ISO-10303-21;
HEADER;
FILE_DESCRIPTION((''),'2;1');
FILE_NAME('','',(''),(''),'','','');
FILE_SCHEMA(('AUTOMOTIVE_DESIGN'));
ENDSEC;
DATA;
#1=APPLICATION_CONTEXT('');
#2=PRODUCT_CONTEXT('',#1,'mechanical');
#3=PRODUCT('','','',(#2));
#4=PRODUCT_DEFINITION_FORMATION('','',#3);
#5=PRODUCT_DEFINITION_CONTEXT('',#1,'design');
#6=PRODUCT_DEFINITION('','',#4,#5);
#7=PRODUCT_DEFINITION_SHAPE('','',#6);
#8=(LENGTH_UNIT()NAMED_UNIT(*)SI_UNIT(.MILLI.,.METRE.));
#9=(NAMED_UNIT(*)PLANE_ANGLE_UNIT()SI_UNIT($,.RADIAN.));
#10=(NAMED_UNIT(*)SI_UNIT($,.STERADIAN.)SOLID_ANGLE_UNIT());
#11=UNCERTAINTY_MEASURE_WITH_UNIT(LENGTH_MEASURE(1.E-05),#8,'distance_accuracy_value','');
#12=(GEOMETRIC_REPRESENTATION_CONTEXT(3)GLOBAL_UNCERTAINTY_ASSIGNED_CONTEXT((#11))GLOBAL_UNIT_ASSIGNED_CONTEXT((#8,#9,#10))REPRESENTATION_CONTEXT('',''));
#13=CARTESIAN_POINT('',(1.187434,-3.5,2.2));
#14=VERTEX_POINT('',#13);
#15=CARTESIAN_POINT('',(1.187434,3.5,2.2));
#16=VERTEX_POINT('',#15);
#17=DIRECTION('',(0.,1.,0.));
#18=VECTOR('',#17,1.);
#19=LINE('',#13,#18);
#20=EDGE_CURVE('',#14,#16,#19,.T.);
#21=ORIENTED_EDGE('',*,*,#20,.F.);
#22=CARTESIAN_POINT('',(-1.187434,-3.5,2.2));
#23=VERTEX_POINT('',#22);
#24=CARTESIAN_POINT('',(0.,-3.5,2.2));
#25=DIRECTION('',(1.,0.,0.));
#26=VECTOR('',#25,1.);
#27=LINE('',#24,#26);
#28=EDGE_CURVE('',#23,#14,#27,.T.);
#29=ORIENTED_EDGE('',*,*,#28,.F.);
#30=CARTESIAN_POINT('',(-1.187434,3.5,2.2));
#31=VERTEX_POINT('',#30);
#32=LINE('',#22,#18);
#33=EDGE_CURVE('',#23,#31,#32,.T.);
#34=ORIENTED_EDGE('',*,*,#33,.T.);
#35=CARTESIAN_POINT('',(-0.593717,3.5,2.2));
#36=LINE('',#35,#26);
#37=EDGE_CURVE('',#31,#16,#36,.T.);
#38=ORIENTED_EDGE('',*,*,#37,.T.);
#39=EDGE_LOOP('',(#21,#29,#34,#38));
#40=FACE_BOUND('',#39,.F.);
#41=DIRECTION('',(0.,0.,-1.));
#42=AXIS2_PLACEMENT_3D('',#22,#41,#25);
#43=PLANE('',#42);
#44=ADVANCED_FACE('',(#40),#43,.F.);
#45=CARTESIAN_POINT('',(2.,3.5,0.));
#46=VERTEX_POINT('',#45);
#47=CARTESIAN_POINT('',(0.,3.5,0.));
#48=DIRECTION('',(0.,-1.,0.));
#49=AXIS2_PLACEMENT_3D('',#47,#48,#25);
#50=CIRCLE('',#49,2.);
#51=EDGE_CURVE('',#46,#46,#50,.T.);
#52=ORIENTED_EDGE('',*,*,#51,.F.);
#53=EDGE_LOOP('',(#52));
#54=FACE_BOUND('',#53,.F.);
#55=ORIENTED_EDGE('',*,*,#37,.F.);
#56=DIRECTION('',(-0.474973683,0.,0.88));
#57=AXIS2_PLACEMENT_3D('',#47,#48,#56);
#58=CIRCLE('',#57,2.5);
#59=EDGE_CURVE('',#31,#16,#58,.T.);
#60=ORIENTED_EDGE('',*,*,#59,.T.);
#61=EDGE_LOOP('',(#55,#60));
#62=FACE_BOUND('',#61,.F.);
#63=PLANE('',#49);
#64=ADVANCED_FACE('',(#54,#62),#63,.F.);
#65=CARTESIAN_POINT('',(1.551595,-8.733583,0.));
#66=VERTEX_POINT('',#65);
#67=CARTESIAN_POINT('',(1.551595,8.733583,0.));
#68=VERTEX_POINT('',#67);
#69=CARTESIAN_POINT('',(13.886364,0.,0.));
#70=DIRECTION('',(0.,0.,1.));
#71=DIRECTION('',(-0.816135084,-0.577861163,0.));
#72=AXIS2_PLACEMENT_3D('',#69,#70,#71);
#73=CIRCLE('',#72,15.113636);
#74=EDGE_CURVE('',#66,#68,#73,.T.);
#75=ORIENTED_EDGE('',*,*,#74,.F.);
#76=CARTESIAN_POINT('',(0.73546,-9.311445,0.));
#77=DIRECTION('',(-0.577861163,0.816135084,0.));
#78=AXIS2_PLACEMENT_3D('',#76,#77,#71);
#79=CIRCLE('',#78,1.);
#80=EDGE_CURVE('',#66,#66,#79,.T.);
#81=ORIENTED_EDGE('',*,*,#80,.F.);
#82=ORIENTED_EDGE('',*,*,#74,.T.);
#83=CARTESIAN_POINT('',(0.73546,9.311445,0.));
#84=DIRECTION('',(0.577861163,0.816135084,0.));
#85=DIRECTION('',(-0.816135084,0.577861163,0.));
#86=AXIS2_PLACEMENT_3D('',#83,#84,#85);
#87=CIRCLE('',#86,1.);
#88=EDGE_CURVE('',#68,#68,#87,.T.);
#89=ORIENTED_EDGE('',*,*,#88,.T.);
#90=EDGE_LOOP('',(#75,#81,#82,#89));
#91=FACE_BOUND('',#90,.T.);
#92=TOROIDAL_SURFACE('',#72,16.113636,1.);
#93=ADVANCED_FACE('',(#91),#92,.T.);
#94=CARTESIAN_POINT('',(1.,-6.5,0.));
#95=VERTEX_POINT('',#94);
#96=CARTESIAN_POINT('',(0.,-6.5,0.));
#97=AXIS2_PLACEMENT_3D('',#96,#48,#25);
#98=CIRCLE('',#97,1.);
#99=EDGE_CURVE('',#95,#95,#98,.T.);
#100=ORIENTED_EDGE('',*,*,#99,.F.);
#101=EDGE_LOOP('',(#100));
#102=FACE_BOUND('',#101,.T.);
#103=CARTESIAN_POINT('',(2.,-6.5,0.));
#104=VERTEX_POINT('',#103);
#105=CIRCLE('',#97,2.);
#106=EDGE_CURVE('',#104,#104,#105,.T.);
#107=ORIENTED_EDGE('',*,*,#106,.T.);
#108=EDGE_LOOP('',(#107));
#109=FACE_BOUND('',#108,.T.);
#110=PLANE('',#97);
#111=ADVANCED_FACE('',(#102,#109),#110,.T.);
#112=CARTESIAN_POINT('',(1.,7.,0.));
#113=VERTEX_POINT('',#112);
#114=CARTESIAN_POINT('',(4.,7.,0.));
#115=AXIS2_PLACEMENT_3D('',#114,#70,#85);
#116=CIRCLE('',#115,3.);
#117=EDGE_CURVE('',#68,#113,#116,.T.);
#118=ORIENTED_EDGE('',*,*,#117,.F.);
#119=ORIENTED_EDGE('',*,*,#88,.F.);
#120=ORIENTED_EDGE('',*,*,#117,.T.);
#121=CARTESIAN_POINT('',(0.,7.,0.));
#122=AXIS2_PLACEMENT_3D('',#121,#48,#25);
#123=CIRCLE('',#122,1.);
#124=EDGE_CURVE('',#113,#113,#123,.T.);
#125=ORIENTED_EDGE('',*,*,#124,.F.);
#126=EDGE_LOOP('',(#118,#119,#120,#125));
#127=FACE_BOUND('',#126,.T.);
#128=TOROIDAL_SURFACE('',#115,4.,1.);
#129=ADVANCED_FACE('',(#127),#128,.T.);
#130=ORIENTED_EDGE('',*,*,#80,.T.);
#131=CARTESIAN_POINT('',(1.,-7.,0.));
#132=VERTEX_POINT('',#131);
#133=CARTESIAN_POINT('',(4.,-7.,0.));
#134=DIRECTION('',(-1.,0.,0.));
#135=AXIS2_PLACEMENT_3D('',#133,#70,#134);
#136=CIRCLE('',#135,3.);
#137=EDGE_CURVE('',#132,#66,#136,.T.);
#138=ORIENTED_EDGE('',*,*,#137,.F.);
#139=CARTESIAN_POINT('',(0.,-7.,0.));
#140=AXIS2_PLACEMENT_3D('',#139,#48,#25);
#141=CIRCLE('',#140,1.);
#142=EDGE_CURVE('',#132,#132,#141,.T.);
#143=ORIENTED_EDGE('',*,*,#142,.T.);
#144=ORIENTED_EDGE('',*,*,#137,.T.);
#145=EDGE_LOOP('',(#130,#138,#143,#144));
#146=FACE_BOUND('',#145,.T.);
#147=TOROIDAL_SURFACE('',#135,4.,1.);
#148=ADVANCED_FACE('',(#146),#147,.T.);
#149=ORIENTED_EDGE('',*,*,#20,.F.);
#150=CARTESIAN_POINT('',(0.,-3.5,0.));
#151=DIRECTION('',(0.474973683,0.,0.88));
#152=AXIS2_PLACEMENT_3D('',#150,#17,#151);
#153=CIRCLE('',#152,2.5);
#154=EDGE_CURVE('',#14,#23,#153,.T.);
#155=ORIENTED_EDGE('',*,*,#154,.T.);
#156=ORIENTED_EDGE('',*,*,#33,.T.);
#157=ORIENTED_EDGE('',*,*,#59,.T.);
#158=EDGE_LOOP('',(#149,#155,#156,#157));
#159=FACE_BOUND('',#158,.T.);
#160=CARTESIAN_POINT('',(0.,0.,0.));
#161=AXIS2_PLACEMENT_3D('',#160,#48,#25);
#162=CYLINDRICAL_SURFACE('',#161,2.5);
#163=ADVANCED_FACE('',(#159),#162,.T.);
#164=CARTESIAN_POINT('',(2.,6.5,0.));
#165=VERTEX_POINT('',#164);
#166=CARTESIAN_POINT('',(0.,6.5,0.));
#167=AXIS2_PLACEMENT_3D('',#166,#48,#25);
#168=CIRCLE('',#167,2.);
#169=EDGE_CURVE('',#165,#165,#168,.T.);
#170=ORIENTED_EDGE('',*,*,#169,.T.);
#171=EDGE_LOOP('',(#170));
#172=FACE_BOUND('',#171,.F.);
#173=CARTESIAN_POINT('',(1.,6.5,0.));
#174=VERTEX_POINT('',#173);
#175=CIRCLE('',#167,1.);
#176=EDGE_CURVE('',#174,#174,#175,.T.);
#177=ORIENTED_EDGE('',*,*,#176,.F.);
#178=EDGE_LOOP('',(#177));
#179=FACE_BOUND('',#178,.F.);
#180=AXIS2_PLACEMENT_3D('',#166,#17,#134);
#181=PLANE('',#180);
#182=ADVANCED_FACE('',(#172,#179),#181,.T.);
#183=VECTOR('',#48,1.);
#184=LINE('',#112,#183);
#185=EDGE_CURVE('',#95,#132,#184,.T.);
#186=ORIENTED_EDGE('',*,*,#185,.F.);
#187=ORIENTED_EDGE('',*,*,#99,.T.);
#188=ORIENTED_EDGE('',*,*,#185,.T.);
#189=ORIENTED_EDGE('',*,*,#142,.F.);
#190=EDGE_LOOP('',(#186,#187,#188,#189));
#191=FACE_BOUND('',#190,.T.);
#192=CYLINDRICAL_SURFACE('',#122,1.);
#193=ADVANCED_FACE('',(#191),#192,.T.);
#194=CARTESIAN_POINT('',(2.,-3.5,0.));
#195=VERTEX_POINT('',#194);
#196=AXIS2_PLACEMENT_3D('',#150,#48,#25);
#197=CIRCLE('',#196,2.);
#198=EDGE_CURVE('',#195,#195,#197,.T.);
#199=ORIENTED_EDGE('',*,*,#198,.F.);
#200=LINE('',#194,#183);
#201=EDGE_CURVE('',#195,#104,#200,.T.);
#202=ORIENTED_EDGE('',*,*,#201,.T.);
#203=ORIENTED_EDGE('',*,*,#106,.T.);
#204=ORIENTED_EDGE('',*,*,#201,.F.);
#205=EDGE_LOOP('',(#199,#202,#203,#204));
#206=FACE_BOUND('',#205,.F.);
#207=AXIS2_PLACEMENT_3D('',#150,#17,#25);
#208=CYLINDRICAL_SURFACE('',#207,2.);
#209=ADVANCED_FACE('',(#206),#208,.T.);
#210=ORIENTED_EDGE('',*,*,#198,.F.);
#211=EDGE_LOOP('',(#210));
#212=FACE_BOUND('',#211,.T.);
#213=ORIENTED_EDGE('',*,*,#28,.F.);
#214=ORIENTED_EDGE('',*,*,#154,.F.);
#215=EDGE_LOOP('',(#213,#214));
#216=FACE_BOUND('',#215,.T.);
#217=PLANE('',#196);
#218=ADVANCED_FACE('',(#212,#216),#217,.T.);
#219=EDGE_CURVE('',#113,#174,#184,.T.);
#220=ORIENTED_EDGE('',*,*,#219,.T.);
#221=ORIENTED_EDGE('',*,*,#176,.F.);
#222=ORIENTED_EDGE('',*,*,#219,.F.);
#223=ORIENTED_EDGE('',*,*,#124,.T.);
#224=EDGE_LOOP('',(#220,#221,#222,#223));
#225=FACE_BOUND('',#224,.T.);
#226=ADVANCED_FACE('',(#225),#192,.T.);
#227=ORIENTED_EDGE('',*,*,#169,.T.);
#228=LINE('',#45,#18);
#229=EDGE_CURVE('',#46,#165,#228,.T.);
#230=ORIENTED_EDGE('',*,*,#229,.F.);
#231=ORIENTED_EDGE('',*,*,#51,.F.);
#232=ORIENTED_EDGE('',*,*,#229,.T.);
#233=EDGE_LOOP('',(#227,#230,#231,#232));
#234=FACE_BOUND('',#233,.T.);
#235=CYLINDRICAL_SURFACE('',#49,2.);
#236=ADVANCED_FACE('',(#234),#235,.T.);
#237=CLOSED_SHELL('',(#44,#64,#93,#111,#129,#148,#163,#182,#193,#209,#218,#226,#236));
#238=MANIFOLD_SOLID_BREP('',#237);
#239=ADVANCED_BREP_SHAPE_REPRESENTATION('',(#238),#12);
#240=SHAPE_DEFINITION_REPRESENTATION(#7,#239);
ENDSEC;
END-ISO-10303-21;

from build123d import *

# Parameters (mm, degrees)
F0_R     = 2.5
F1_DEPTH = 3.5
F2_W     = 2.3748684174
F2_H     = 0.3
F3_DEPTH = 7.001
F4_R     = 2
F5_DEPTH = 3
F7_R     = 1


# Not quite as in the source:
# - a pattern or mirror of a feature is missing from the dataset's text; its kind, count and spacing are read off the source's solid


with BuildPart() as f1:
    # F0 (on Front) → F1 (new body, symmetric)
    with BuildSketch(Plane.XZ):
        Circle(F0_R)
    extrude(amount=F1_DEPTH, both=True)

    # F2 (on face) → F3 (cut, through all)
    with BuildSketch(Plane.XZ.offset(3.5)):
        with Locations((0, 2.35)):
            Rectangle(F2_W, F2_H)
    extrude(amount=-F3_DEPTH, mode=Mode.SUBTRACT)

    # F4 (on face) → F5 (join)
    with BuildSketch(Plane.XZ.offset(3.5)):
        Circle(F4_R)
    f5 = extrude(amount=F5_DEPTH)

    # F5_copies: F5 across plane
    add(f5.mirror(Plane.ZX))

    # F8: sweep along a path in F6
    with BuildLine(Plane.XY) as f8_path:
        Line((0, 7), (0, -7))
        ThreePointArc((0, -7), (0.1882968799, -8.2128146291), (0.7354596623, -9.3114446529))
        ThreePointArc((0.7354596623, -9.3114446529), (30, 0), (0.7354596623, 9.3114446529))
        ThreePointArc((0.7354596623, 9.3114446529), (0.1882968799, 8.2128146291), (0, 7))
    # F7 (on face) → F8 (sweep)
    with BuildSketch(Plane.XZ.offset(6.5)):
        Circle(F7_R)
    sweep(path=f8_path.line)


solid = f1.part
